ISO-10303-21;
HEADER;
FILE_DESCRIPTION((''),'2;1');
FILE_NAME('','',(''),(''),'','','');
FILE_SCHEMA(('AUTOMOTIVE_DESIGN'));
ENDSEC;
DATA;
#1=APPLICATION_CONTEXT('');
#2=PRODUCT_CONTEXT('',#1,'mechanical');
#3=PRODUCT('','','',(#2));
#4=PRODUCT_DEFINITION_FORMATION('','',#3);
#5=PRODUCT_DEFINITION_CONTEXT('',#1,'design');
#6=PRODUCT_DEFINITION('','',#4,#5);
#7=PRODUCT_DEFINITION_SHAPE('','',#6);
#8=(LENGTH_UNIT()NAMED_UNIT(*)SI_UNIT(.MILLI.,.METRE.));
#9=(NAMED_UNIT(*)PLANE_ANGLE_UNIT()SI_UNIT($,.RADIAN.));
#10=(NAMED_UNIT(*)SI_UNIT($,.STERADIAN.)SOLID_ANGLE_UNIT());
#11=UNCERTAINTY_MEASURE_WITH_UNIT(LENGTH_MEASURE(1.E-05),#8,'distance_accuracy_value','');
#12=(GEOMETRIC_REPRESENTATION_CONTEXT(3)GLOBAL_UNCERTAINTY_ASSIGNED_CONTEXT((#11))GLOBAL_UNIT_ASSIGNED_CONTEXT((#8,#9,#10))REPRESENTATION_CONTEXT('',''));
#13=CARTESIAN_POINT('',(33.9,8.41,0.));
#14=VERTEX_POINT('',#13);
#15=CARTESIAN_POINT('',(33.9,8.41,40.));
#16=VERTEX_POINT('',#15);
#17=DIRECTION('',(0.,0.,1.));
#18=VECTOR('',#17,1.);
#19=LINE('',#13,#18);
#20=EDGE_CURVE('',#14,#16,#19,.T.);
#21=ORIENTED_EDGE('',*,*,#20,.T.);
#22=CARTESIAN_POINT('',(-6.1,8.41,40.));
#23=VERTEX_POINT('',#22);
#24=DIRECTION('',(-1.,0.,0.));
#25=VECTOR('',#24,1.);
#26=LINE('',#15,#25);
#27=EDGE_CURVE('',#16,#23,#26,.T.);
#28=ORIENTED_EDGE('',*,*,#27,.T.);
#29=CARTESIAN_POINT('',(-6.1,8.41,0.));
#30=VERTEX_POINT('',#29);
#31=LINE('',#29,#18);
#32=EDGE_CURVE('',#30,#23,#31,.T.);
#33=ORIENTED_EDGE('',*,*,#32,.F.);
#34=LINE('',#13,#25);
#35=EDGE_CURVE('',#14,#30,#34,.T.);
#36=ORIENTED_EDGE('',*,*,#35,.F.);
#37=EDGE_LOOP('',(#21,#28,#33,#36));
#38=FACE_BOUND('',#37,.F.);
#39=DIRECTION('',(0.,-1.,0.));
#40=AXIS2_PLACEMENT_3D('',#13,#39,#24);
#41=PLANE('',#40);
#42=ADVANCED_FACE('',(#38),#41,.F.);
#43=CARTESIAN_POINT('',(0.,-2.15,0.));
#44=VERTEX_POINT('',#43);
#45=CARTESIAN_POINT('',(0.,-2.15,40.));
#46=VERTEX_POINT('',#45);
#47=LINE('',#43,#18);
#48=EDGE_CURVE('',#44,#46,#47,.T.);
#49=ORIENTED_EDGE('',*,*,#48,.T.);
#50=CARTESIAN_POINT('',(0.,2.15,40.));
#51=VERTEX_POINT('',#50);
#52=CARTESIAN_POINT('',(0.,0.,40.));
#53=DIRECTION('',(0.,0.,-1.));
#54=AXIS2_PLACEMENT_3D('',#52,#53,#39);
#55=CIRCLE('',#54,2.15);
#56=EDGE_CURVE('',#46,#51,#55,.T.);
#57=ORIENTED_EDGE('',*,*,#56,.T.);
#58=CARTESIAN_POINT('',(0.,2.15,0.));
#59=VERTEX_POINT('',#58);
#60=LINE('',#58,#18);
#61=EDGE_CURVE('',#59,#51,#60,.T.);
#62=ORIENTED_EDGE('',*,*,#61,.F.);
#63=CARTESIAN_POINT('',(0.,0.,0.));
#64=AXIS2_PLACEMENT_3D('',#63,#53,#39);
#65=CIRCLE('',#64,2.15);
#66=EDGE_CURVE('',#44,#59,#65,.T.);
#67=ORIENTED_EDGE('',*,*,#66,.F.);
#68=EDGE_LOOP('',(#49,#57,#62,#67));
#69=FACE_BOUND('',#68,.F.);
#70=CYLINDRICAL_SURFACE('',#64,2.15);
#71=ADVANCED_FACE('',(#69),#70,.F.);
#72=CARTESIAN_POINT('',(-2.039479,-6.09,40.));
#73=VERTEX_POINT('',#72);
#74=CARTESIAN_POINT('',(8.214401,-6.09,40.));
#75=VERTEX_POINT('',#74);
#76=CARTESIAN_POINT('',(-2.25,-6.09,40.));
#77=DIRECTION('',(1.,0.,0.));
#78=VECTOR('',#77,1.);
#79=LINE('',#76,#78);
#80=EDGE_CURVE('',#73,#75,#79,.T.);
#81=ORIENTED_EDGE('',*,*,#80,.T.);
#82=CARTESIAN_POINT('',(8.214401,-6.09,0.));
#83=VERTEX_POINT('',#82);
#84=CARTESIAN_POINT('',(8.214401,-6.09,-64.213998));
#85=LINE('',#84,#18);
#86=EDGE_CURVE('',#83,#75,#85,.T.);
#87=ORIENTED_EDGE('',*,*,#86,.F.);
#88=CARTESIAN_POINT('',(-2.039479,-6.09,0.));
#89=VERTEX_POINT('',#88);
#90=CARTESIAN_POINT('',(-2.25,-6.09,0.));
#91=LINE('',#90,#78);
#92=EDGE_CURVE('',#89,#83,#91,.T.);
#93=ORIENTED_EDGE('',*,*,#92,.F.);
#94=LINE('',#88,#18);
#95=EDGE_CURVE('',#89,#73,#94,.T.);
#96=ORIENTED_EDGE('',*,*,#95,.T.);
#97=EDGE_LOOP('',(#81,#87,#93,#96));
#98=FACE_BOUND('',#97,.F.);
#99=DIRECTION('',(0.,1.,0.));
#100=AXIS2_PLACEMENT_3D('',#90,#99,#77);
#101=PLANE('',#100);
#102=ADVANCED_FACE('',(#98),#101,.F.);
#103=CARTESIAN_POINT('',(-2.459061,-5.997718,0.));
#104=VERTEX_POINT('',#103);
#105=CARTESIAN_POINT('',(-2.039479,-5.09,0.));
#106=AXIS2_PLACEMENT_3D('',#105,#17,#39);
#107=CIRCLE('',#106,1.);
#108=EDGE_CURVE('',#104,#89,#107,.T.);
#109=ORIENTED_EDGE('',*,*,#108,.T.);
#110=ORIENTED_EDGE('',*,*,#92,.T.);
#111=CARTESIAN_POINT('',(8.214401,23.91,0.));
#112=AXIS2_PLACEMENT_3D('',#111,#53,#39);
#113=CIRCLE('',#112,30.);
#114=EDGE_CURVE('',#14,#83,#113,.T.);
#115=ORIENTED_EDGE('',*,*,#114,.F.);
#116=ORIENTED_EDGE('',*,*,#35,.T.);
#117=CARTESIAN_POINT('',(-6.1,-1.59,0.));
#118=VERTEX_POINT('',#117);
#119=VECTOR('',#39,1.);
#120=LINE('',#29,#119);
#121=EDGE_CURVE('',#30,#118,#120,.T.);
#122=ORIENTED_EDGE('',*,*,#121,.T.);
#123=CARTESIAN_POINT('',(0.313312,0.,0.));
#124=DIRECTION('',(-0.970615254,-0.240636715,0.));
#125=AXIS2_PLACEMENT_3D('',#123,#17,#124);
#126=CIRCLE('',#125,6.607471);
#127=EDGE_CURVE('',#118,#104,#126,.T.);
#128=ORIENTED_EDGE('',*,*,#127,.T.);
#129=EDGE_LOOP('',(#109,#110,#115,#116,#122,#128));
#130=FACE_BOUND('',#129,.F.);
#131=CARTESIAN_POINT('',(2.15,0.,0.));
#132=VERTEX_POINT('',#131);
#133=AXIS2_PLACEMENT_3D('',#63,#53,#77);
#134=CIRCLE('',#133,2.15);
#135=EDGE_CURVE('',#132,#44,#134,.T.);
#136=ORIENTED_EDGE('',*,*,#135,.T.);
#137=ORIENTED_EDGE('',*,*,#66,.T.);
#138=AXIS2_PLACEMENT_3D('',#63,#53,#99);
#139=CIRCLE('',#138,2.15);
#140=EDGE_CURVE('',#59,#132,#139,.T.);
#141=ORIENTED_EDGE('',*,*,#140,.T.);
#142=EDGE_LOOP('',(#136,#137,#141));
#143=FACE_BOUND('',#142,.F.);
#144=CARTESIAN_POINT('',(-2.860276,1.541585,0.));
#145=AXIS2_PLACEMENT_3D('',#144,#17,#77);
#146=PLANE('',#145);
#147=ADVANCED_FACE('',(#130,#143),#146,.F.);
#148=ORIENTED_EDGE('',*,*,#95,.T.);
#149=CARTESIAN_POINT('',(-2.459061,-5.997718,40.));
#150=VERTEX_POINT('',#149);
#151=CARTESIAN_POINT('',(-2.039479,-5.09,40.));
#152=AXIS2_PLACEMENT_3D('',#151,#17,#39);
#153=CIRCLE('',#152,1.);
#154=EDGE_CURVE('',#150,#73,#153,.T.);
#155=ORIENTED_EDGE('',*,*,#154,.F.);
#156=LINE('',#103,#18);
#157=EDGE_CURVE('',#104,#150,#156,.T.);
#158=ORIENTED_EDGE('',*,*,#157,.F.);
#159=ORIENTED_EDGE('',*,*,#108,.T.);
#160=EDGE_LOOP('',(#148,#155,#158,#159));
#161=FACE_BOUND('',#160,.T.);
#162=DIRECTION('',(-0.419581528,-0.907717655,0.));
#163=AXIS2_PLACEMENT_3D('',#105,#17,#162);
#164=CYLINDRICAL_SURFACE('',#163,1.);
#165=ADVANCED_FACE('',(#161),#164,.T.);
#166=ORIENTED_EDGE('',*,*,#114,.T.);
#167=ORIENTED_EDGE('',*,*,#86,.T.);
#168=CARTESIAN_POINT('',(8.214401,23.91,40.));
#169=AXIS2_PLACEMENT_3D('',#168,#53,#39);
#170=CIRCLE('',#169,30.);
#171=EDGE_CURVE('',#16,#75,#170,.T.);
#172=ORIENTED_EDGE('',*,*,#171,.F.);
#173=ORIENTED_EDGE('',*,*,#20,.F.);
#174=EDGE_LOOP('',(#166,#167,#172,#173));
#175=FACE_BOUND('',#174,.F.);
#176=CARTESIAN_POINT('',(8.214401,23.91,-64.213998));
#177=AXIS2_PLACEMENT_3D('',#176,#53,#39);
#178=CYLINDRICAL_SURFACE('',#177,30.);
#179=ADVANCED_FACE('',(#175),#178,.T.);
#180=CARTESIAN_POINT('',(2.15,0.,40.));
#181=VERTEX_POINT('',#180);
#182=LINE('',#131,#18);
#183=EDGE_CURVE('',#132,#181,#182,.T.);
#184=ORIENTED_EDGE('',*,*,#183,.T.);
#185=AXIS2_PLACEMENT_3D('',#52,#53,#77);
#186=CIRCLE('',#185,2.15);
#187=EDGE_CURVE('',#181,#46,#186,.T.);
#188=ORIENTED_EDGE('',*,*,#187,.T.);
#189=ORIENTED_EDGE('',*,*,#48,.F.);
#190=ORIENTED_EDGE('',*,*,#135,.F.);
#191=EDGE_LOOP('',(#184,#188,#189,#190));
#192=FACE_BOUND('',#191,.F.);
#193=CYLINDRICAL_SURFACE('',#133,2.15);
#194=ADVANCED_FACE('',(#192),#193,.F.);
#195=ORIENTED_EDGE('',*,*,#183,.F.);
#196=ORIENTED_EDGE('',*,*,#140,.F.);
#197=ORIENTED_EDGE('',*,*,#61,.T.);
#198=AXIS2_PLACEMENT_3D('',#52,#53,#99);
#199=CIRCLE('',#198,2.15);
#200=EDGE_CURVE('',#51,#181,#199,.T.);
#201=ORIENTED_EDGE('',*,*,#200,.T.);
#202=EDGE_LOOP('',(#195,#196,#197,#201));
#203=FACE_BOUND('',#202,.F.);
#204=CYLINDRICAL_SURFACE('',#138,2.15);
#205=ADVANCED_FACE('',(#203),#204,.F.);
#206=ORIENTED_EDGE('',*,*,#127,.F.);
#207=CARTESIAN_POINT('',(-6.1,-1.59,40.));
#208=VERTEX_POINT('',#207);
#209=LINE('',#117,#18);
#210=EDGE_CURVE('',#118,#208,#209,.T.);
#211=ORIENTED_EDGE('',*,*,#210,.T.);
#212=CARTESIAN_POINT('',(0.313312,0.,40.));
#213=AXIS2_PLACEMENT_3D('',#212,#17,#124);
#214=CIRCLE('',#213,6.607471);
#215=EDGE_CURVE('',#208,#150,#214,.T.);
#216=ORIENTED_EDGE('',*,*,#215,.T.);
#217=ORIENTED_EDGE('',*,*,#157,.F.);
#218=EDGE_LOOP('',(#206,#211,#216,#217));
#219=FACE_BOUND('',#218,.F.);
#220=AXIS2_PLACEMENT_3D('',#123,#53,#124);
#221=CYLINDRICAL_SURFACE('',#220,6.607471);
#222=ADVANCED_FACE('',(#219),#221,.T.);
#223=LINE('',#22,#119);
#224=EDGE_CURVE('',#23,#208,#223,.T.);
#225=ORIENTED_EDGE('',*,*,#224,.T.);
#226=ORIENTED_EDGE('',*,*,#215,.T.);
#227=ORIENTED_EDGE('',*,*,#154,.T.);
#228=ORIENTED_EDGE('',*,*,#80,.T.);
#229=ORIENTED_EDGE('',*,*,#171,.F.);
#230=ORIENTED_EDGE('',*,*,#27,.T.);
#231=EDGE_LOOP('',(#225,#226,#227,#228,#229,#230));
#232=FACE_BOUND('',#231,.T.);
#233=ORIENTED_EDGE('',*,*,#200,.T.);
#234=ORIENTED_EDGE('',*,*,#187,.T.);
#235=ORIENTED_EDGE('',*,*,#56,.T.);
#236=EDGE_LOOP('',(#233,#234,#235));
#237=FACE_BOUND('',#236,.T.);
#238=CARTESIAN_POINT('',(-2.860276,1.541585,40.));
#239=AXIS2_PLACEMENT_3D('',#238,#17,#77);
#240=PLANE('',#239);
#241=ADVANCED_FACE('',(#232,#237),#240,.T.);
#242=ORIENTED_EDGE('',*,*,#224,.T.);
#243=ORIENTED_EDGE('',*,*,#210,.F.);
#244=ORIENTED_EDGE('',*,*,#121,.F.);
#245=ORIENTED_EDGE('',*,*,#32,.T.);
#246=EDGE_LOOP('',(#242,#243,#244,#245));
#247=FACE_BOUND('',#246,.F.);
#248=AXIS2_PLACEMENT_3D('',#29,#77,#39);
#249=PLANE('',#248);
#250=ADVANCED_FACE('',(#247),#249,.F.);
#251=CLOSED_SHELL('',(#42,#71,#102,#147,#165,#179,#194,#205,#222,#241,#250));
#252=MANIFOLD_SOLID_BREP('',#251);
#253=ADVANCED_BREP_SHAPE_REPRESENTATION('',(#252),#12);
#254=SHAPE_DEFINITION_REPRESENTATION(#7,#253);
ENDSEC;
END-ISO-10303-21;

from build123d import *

# Parameters (mm, degrees)
F1_DEPTH    = 40
F2_R        = 1
F3_T1_DEPTH = 168.4279953904


# Not quite as in the source:
# - a fillet or chamfer that OpenCascade refuses, or shapes differently, is made with other operations: its cross-section is extruded or revolved along the edge and cut away or added


with BuildPart() as f1:
    # F0 (on Top) → F1 (new body)
    with BuildSketch(Plane.XY):
        with BuildLine():
            Line((0, 2.15), (0, 8.41))
            Line((0, 8.41), (-6.1, 8.41))
            Line((-6.1, 8.41), (-6.1, -1.59))
            ThreePointArc((-6.1, -1.59), (-4.7073896383, -4.2954889128), (-2.25, -6.09))
            Line((-2.25, -6.09), (0, -6.09))
            Line((0, -6.09), (0, -2.15))
            ThreePointArc((0, -2.15), (-2.15, 0), (0, 2.15))
        make_face()
        with BuildLine():
            Line((6.1, -1.59), (6.1, 8.41))
            Line((6.1, 8.41), (0, 8.41))
            Line((0, 8.41), (0, 2.15))
            ThreePointArc((0, 2.15), (1.5202795796, 1.5202795796), (2.15, 0))
            ThreePointArc((2.15, 0), (1.5202795796, -1.5202795796), (0, -2.15))
            Line((0, -2.15), (0, -6.09))
            Line((0, -6.09), (2.25, -6.09))
            ThreePointArc((2.25, -6.09), (4.7073896383, -4.2954889128), (6.1, -1.59))
        make_face()
        with BuildLine():
            Line((33.9, 8.41), (6.1, 8.41))
            Line((6.1, 8.41), (6.1, -1.59))
            ThreePointArc((6.1, -1.59), (4.7073896383, -4.2954889128), (2.25, -6.09))
            Line((2.25, -6.09), (33.9, -6.09))
            Line((33.9, -6.09), (33.9, 8.41))
        make_face()
    extrude(amount=F1_DEPTH)

    # F2
    f2_edges = [f1.edges().sort_by_distance(p)[0] for p in [
        (-2.25, -6.09, 20),
    ]]
    fillet(f2_edges, radius=F2_R)

    # F3: fillet of radius 30 on 1 edges, made by hand

    # F3_s2 → F3_t1 (cut)
    with BuildSketch(Plane.XY.offset(-64.2139976952)):
        with BuildLine():
            ThreePointArc((8.2144009219, -6.09), (22.9622821257, -2.2147009552), (33.9, 8.41))
            Line((33.9, 8.41), (33.9, -6.09))
            Line((33.9, -6.09), (8.2144009219, -6.09))
        make_face()
    extrude(amount=F3_T1_DEPTH, mode=Mode.SUBTRACT)


solid = f1.part
